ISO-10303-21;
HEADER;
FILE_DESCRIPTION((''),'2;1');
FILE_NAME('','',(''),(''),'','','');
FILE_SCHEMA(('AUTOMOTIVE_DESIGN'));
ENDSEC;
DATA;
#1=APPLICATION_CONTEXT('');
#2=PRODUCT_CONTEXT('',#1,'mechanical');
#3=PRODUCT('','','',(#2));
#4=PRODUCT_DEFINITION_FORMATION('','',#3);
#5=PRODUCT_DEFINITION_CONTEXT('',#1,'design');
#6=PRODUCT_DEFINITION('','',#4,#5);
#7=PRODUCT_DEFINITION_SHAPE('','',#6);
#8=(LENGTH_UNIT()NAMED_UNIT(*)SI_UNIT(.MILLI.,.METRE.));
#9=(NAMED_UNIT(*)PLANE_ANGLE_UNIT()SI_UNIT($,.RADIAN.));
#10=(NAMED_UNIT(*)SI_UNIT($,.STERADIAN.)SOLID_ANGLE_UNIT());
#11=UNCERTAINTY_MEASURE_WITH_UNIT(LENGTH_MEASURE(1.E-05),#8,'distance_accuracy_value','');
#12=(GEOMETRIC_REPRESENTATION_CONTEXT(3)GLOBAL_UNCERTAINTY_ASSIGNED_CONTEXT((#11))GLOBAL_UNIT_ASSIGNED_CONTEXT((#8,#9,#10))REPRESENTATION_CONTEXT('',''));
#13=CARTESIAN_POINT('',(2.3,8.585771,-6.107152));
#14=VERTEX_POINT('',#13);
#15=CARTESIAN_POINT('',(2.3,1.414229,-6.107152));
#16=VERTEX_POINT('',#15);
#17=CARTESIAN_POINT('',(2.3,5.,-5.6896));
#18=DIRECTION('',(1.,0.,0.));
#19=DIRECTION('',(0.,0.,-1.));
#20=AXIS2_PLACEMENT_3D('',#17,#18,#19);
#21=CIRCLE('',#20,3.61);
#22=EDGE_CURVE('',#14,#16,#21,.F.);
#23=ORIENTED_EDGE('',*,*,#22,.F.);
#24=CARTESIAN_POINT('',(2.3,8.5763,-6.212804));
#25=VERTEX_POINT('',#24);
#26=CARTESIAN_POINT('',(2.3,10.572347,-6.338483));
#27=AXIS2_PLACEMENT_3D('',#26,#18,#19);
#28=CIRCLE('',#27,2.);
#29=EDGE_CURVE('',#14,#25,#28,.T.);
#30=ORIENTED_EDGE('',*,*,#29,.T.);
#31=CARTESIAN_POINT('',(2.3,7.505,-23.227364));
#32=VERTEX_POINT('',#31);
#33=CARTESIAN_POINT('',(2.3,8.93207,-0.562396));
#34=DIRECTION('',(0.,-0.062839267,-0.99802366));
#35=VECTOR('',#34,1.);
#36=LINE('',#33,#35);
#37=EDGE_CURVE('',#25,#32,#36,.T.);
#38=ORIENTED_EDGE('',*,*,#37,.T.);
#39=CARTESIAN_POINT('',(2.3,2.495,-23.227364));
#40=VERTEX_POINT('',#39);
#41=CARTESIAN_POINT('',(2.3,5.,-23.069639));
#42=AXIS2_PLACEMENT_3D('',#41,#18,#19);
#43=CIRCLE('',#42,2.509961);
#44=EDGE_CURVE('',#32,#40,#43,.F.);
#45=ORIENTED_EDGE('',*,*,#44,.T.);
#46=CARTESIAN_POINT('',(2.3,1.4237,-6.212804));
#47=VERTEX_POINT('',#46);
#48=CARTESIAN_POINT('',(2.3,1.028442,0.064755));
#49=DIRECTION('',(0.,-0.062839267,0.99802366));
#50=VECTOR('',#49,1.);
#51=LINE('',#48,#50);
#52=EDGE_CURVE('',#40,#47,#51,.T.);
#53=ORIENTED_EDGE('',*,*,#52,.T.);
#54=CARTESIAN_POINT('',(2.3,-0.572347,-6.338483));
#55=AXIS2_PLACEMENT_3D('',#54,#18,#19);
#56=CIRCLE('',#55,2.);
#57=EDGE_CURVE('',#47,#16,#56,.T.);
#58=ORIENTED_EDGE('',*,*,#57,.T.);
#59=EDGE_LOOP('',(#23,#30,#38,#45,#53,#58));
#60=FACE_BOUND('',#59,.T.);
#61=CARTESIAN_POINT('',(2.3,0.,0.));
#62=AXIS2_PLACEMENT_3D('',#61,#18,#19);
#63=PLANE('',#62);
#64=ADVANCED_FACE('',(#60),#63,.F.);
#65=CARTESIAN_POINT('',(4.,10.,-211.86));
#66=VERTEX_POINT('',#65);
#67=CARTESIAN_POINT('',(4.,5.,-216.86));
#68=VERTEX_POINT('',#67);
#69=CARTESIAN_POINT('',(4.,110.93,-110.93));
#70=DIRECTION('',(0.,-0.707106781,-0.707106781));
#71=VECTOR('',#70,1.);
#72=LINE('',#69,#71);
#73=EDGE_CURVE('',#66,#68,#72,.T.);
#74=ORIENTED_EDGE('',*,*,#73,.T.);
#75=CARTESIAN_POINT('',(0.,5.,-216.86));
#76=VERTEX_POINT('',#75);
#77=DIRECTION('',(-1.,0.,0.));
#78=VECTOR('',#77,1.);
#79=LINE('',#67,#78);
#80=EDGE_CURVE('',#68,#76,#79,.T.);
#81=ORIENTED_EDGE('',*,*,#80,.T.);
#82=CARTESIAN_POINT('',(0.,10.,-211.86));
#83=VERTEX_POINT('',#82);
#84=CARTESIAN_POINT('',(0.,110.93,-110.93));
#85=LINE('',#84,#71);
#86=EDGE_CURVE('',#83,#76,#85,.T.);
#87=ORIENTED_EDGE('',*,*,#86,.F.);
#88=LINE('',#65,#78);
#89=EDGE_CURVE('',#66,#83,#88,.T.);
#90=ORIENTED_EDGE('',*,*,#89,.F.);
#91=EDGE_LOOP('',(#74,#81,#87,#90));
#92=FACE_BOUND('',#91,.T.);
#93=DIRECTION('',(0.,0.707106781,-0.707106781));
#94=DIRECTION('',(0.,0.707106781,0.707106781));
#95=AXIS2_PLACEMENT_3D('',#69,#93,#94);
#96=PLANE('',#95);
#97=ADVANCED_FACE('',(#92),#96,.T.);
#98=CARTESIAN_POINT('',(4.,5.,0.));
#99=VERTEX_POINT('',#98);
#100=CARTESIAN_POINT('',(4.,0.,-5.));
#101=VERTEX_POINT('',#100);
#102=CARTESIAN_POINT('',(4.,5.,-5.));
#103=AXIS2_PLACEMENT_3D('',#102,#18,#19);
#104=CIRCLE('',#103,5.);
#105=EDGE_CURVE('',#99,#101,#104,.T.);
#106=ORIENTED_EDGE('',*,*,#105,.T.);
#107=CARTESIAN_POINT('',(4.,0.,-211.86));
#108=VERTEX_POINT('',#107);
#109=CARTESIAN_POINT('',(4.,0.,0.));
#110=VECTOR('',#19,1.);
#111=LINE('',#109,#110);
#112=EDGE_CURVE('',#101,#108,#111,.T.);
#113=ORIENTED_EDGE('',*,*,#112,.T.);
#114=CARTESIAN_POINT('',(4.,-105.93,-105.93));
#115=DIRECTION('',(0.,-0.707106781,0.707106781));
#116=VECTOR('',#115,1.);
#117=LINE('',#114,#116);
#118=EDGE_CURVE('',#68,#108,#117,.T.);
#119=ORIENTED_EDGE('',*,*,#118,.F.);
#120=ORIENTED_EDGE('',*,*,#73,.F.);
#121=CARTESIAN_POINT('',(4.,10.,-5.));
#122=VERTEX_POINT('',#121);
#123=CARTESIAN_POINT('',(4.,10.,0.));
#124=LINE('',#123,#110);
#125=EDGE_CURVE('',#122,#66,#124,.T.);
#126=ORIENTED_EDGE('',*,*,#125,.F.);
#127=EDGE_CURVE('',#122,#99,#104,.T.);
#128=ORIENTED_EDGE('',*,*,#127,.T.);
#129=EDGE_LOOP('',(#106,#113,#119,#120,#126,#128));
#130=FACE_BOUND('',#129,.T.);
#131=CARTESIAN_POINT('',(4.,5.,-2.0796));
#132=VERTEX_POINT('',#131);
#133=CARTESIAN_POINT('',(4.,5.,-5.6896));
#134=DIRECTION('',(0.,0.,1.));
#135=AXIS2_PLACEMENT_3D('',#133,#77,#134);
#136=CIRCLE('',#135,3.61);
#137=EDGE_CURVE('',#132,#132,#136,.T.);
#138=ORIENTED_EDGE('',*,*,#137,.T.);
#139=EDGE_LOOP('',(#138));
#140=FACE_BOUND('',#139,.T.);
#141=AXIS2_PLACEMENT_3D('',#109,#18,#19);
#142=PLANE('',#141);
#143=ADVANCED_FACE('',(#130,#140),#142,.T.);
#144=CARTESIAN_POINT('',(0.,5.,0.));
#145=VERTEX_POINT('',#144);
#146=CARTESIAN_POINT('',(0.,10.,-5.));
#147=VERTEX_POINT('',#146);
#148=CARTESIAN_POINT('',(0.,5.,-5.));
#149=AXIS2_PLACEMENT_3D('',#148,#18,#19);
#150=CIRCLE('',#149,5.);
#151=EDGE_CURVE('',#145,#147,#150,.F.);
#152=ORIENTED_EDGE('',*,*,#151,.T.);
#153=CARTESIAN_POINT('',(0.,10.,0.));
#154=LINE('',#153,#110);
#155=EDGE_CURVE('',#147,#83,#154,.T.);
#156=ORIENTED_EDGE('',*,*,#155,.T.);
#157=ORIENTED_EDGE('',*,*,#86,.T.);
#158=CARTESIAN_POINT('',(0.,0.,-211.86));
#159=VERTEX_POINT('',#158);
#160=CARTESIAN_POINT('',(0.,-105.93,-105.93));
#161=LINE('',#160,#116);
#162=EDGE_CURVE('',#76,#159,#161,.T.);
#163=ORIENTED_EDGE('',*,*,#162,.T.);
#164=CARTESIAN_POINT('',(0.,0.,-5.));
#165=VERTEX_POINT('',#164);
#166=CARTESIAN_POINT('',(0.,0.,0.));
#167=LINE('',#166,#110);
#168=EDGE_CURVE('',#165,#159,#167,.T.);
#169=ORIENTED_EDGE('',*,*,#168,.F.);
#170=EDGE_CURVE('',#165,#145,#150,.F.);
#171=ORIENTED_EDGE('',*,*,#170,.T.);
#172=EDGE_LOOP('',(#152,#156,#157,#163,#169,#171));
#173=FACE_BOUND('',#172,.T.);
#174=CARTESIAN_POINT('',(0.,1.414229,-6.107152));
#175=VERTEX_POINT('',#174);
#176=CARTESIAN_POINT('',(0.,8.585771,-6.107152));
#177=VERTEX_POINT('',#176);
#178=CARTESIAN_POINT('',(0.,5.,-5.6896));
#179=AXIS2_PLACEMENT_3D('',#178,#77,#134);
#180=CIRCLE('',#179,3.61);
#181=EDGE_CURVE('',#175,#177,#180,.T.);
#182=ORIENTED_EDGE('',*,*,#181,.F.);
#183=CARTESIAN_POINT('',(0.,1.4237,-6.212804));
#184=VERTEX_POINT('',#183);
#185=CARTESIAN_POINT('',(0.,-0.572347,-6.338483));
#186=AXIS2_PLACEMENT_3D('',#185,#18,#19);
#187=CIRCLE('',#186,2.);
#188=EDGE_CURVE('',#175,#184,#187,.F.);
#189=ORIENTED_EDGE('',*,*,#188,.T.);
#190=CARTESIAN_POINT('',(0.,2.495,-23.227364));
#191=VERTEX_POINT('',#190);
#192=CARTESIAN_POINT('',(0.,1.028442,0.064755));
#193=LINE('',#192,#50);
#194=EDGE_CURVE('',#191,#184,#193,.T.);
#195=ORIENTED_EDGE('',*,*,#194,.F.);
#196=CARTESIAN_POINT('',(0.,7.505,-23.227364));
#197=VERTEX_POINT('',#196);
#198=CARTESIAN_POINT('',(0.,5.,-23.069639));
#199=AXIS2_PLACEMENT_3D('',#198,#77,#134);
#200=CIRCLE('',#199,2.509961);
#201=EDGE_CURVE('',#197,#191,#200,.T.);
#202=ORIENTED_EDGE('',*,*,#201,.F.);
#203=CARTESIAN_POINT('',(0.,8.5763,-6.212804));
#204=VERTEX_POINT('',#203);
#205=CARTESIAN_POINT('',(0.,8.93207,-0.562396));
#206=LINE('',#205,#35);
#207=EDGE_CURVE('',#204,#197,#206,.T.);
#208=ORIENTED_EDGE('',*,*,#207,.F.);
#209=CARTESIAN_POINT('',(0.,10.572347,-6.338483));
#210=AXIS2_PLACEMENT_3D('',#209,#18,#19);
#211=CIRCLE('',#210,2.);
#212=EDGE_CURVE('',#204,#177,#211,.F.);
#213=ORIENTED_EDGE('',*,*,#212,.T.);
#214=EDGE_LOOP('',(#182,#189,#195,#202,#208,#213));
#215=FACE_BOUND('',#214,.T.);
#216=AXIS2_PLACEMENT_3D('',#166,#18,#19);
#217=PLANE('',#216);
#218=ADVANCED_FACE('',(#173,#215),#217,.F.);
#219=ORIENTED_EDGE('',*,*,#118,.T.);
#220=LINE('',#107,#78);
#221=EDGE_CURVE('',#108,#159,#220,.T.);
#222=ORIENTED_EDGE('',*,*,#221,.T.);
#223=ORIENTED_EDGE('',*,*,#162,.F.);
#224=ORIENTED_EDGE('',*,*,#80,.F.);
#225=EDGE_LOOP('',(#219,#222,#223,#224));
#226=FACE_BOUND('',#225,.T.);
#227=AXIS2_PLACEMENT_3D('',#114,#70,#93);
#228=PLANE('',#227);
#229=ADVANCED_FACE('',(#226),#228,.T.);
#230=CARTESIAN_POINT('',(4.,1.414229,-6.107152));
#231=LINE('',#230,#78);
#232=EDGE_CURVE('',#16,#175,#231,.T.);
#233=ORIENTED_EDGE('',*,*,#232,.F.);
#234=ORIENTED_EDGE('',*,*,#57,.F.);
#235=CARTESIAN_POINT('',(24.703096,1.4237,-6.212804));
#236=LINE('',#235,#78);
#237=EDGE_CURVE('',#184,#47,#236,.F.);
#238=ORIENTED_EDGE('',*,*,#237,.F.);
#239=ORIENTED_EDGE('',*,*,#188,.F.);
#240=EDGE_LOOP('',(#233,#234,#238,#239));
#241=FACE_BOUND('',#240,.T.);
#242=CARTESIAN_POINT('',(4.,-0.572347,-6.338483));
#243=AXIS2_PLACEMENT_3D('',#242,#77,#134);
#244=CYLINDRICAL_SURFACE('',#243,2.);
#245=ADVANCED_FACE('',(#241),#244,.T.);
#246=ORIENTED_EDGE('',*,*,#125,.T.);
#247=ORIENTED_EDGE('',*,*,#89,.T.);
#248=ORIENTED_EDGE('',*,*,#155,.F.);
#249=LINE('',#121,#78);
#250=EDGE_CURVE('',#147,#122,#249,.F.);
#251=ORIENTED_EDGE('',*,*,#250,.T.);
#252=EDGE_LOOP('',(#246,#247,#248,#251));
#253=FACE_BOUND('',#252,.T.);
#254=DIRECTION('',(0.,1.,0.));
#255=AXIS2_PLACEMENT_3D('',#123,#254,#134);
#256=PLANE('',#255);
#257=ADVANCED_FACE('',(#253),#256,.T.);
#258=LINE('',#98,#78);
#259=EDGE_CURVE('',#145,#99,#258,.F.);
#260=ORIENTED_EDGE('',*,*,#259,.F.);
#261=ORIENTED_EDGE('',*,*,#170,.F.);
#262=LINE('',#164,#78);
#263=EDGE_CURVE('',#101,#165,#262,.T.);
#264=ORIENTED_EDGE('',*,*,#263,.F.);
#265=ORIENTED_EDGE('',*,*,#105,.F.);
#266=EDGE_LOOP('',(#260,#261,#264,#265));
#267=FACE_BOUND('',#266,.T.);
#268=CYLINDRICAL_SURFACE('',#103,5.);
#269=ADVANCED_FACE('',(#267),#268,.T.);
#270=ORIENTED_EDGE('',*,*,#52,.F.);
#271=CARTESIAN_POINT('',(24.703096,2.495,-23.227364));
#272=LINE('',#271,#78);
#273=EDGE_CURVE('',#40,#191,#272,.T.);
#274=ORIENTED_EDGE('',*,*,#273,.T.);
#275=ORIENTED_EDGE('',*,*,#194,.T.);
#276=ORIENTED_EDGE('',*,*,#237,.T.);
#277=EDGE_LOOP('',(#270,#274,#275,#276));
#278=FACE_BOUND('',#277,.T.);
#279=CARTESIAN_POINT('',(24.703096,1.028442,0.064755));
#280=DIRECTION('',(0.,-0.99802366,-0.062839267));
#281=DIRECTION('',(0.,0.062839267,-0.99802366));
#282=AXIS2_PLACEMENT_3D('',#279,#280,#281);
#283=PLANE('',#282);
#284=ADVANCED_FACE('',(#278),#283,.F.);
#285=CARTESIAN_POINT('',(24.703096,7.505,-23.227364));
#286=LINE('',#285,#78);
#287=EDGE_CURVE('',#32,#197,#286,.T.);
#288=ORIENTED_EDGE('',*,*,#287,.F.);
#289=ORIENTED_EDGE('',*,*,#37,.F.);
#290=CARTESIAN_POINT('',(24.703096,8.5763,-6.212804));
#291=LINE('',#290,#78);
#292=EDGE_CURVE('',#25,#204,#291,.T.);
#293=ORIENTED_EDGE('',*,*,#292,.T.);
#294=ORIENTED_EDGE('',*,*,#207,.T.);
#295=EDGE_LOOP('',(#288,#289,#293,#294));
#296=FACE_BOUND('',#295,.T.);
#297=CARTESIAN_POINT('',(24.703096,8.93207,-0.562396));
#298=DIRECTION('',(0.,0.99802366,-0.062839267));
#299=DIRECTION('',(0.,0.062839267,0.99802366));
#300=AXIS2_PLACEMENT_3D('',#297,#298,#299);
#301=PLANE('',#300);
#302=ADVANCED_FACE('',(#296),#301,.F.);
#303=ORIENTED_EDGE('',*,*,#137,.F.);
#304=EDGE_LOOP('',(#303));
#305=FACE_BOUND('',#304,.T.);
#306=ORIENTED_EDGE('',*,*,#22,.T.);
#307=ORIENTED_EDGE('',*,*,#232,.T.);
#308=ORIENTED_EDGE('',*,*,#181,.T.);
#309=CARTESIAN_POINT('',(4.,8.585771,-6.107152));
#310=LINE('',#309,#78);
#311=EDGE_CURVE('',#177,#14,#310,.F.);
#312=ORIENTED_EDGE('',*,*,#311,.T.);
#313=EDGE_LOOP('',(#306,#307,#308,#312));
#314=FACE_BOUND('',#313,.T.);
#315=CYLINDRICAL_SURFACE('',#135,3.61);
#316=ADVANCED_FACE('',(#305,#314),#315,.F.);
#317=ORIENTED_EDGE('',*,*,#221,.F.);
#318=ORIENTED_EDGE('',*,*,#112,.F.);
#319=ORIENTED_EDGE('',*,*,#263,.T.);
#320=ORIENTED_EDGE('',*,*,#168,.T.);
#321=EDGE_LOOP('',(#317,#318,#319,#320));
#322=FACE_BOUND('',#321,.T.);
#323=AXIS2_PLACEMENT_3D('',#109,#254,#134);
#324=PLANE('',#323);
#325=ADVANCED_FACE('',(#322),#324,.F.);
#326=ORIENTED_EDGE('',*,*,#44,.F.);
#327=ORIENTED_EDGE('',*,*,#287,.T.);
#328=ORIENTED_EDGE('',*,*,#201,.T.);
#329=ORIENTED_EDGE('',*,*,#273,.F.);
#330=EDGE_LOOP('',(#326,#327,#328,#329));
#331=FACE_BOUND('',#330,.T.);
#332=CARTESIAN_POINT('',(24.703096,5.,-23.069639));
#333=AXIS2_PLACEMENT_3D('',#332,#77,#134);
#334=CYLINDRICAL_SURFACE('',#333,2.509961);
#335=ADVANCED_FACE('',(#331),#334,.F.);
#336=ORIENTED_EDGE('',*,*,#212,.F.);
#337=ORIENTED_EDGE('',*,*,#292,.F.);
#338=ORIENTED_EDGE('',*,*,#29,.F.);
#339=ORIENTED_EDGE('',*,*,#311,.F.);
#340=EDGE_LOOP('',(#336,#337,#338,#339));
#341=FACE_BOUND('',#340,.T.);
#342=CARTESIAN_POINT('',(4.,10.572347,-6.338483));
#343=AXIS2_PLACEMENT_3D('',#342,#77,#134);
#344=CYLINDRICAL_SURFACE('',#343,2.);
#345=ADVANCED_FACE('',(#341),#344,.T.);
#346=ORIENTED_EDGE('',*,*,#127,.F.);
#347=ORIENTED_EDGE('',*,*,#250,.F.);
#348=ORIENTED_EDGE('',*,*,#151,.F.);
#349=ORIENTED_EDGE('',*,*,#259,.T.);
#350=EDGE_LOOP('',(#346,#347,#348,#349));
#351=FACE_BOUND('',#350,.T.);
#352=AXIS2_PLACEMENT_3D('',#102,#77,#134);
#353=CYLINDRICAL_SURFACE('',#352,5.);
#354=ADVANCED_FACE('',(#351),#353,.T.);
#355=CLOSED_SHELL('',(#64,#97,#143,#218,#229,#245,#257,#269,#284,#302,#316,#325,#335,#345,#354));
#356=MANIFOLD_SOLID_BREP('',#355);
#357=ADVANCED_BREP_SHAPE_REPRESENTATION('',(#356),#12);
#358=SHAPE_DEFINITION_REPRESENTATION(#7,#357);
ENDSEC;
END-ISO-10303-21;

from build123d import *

# Parameters (mm, degrees)
SKETCH1_W           = 191.86
SKETCH1_H           = 10
BOSS_EXTRUDE1_DEPTH = 4
SKETCH7_R           = 3.61
CUT_EXTRUDE1_DEPTH  = 218.127288934
CUT_EXTRUDE2_DEPTH  = 2.3
FILLET1_R           = 5
FILLET2_R           = 2


# Some blends are built 0.0001 mm under size
with BuildPart() as part:
    # Sketch1 → Boss-Extrude1 (new body)
    with BuildSketch(Plane(origin=(0, 0, 0), x_dir=(0, 0, -1), z_dir=(1, 0, 0))):
        with Locations((95.93, 5)):
            Rectangle(SKETCH1_W, SKETCH1_H)
        Polygon((211.86, 0), (191.86, 0), (191.86, 10), (211.86, 10), (216.86, 5), align=None)
    extrude(amount=BOSS_EXTRUDE1_DEPTH)

    # Sketch7 → Cut-Extrude1 (cut, through all)
    with BuildSketch(Plane.ZY):
        with Locations((-5.6896, 5)):
            Circle(SKETCH7_R)
    extrude(amount=-CUT_EXTRUDE1_DEPTH, mode=Mode.SUBTRACT)

    # Sketch7<3> → Cut-Extrude2 (cut)
    with BuildSketch(Plane.ZY):
        with BuildLine():
            ThreePointArc((-6.154035141, 1.42), (-9.2996, 5), (-6.154035141, 8.58))
            Line((-6.154035141, 8.58), (-23.227363545, 7.505))
            ThreePointArc((-23.227363545, 7.505), (-25.5796, 5), (-23.227363545, 2.495))
            Line((-23.227363545, 2.495), (-6.154035141, 1.42))
        make_face()
    extrude(amount=-CUT_EXTRUDE2_DEPTH, mode=Mode.SUBTRACT)

    # Fillet1
    fillet1_edges = [part.edges().sort_by_distance(p)[0] for p in [
        (2, 10, 0),
        (2, 0, 0),
    ]]
    fillet(fillet1_edges, radius=FILLET1_R - 0.0001)  # a hair under: the kernel refuses the full size

    # Fillet2
    # the kernel refuses this fillet: 2 mm, written as the material it takes off along each edge
    with BuildSketch(Plane(origin=(-0.147213915, 1.42, -6.154035141), x_dir=(0, -0.12216150848858905, 0.9925102346292417), z_dir=(1, 0, 0))) as fillet2_piece_1:
        with BuildLine():
            CenterArc((0.060321863, 1.999957195), FILLET2_R, 266.585932682, 3.039206924)
            Line((-0.058781058, 0.003506721), (0, 0))
            ThreePointArc((0, 0), (0.02361843, 7.7263e-05), (0.04723686, 0))
        make_face()
    extrude(amount=2.447213915, mode=Mode.SUBTRACT)
    with BuildSketch(Plane(origin=(-0.147213915, 8.58, -6.154035141), x_dir=(0, 0.12216150848853974, 0.9925102346292478), z_dir=(1, 0, 0))) as fillet2_piece_2:
        with BuildLine():
            CenterArc((0.060321863, -1.999957195), FILLET2_R, 90.374860394, 3.039206924)
            Line((-0.058781058, -0.003506721), (0, 0))
            ThreePointArc((0, 0), (0.02361843, -7.7263e-05), (0.04723686, 0))
        make_face()
    extrude(amount=2.447213915, mode=Mode.SUBTRACT)


solid = part.part
